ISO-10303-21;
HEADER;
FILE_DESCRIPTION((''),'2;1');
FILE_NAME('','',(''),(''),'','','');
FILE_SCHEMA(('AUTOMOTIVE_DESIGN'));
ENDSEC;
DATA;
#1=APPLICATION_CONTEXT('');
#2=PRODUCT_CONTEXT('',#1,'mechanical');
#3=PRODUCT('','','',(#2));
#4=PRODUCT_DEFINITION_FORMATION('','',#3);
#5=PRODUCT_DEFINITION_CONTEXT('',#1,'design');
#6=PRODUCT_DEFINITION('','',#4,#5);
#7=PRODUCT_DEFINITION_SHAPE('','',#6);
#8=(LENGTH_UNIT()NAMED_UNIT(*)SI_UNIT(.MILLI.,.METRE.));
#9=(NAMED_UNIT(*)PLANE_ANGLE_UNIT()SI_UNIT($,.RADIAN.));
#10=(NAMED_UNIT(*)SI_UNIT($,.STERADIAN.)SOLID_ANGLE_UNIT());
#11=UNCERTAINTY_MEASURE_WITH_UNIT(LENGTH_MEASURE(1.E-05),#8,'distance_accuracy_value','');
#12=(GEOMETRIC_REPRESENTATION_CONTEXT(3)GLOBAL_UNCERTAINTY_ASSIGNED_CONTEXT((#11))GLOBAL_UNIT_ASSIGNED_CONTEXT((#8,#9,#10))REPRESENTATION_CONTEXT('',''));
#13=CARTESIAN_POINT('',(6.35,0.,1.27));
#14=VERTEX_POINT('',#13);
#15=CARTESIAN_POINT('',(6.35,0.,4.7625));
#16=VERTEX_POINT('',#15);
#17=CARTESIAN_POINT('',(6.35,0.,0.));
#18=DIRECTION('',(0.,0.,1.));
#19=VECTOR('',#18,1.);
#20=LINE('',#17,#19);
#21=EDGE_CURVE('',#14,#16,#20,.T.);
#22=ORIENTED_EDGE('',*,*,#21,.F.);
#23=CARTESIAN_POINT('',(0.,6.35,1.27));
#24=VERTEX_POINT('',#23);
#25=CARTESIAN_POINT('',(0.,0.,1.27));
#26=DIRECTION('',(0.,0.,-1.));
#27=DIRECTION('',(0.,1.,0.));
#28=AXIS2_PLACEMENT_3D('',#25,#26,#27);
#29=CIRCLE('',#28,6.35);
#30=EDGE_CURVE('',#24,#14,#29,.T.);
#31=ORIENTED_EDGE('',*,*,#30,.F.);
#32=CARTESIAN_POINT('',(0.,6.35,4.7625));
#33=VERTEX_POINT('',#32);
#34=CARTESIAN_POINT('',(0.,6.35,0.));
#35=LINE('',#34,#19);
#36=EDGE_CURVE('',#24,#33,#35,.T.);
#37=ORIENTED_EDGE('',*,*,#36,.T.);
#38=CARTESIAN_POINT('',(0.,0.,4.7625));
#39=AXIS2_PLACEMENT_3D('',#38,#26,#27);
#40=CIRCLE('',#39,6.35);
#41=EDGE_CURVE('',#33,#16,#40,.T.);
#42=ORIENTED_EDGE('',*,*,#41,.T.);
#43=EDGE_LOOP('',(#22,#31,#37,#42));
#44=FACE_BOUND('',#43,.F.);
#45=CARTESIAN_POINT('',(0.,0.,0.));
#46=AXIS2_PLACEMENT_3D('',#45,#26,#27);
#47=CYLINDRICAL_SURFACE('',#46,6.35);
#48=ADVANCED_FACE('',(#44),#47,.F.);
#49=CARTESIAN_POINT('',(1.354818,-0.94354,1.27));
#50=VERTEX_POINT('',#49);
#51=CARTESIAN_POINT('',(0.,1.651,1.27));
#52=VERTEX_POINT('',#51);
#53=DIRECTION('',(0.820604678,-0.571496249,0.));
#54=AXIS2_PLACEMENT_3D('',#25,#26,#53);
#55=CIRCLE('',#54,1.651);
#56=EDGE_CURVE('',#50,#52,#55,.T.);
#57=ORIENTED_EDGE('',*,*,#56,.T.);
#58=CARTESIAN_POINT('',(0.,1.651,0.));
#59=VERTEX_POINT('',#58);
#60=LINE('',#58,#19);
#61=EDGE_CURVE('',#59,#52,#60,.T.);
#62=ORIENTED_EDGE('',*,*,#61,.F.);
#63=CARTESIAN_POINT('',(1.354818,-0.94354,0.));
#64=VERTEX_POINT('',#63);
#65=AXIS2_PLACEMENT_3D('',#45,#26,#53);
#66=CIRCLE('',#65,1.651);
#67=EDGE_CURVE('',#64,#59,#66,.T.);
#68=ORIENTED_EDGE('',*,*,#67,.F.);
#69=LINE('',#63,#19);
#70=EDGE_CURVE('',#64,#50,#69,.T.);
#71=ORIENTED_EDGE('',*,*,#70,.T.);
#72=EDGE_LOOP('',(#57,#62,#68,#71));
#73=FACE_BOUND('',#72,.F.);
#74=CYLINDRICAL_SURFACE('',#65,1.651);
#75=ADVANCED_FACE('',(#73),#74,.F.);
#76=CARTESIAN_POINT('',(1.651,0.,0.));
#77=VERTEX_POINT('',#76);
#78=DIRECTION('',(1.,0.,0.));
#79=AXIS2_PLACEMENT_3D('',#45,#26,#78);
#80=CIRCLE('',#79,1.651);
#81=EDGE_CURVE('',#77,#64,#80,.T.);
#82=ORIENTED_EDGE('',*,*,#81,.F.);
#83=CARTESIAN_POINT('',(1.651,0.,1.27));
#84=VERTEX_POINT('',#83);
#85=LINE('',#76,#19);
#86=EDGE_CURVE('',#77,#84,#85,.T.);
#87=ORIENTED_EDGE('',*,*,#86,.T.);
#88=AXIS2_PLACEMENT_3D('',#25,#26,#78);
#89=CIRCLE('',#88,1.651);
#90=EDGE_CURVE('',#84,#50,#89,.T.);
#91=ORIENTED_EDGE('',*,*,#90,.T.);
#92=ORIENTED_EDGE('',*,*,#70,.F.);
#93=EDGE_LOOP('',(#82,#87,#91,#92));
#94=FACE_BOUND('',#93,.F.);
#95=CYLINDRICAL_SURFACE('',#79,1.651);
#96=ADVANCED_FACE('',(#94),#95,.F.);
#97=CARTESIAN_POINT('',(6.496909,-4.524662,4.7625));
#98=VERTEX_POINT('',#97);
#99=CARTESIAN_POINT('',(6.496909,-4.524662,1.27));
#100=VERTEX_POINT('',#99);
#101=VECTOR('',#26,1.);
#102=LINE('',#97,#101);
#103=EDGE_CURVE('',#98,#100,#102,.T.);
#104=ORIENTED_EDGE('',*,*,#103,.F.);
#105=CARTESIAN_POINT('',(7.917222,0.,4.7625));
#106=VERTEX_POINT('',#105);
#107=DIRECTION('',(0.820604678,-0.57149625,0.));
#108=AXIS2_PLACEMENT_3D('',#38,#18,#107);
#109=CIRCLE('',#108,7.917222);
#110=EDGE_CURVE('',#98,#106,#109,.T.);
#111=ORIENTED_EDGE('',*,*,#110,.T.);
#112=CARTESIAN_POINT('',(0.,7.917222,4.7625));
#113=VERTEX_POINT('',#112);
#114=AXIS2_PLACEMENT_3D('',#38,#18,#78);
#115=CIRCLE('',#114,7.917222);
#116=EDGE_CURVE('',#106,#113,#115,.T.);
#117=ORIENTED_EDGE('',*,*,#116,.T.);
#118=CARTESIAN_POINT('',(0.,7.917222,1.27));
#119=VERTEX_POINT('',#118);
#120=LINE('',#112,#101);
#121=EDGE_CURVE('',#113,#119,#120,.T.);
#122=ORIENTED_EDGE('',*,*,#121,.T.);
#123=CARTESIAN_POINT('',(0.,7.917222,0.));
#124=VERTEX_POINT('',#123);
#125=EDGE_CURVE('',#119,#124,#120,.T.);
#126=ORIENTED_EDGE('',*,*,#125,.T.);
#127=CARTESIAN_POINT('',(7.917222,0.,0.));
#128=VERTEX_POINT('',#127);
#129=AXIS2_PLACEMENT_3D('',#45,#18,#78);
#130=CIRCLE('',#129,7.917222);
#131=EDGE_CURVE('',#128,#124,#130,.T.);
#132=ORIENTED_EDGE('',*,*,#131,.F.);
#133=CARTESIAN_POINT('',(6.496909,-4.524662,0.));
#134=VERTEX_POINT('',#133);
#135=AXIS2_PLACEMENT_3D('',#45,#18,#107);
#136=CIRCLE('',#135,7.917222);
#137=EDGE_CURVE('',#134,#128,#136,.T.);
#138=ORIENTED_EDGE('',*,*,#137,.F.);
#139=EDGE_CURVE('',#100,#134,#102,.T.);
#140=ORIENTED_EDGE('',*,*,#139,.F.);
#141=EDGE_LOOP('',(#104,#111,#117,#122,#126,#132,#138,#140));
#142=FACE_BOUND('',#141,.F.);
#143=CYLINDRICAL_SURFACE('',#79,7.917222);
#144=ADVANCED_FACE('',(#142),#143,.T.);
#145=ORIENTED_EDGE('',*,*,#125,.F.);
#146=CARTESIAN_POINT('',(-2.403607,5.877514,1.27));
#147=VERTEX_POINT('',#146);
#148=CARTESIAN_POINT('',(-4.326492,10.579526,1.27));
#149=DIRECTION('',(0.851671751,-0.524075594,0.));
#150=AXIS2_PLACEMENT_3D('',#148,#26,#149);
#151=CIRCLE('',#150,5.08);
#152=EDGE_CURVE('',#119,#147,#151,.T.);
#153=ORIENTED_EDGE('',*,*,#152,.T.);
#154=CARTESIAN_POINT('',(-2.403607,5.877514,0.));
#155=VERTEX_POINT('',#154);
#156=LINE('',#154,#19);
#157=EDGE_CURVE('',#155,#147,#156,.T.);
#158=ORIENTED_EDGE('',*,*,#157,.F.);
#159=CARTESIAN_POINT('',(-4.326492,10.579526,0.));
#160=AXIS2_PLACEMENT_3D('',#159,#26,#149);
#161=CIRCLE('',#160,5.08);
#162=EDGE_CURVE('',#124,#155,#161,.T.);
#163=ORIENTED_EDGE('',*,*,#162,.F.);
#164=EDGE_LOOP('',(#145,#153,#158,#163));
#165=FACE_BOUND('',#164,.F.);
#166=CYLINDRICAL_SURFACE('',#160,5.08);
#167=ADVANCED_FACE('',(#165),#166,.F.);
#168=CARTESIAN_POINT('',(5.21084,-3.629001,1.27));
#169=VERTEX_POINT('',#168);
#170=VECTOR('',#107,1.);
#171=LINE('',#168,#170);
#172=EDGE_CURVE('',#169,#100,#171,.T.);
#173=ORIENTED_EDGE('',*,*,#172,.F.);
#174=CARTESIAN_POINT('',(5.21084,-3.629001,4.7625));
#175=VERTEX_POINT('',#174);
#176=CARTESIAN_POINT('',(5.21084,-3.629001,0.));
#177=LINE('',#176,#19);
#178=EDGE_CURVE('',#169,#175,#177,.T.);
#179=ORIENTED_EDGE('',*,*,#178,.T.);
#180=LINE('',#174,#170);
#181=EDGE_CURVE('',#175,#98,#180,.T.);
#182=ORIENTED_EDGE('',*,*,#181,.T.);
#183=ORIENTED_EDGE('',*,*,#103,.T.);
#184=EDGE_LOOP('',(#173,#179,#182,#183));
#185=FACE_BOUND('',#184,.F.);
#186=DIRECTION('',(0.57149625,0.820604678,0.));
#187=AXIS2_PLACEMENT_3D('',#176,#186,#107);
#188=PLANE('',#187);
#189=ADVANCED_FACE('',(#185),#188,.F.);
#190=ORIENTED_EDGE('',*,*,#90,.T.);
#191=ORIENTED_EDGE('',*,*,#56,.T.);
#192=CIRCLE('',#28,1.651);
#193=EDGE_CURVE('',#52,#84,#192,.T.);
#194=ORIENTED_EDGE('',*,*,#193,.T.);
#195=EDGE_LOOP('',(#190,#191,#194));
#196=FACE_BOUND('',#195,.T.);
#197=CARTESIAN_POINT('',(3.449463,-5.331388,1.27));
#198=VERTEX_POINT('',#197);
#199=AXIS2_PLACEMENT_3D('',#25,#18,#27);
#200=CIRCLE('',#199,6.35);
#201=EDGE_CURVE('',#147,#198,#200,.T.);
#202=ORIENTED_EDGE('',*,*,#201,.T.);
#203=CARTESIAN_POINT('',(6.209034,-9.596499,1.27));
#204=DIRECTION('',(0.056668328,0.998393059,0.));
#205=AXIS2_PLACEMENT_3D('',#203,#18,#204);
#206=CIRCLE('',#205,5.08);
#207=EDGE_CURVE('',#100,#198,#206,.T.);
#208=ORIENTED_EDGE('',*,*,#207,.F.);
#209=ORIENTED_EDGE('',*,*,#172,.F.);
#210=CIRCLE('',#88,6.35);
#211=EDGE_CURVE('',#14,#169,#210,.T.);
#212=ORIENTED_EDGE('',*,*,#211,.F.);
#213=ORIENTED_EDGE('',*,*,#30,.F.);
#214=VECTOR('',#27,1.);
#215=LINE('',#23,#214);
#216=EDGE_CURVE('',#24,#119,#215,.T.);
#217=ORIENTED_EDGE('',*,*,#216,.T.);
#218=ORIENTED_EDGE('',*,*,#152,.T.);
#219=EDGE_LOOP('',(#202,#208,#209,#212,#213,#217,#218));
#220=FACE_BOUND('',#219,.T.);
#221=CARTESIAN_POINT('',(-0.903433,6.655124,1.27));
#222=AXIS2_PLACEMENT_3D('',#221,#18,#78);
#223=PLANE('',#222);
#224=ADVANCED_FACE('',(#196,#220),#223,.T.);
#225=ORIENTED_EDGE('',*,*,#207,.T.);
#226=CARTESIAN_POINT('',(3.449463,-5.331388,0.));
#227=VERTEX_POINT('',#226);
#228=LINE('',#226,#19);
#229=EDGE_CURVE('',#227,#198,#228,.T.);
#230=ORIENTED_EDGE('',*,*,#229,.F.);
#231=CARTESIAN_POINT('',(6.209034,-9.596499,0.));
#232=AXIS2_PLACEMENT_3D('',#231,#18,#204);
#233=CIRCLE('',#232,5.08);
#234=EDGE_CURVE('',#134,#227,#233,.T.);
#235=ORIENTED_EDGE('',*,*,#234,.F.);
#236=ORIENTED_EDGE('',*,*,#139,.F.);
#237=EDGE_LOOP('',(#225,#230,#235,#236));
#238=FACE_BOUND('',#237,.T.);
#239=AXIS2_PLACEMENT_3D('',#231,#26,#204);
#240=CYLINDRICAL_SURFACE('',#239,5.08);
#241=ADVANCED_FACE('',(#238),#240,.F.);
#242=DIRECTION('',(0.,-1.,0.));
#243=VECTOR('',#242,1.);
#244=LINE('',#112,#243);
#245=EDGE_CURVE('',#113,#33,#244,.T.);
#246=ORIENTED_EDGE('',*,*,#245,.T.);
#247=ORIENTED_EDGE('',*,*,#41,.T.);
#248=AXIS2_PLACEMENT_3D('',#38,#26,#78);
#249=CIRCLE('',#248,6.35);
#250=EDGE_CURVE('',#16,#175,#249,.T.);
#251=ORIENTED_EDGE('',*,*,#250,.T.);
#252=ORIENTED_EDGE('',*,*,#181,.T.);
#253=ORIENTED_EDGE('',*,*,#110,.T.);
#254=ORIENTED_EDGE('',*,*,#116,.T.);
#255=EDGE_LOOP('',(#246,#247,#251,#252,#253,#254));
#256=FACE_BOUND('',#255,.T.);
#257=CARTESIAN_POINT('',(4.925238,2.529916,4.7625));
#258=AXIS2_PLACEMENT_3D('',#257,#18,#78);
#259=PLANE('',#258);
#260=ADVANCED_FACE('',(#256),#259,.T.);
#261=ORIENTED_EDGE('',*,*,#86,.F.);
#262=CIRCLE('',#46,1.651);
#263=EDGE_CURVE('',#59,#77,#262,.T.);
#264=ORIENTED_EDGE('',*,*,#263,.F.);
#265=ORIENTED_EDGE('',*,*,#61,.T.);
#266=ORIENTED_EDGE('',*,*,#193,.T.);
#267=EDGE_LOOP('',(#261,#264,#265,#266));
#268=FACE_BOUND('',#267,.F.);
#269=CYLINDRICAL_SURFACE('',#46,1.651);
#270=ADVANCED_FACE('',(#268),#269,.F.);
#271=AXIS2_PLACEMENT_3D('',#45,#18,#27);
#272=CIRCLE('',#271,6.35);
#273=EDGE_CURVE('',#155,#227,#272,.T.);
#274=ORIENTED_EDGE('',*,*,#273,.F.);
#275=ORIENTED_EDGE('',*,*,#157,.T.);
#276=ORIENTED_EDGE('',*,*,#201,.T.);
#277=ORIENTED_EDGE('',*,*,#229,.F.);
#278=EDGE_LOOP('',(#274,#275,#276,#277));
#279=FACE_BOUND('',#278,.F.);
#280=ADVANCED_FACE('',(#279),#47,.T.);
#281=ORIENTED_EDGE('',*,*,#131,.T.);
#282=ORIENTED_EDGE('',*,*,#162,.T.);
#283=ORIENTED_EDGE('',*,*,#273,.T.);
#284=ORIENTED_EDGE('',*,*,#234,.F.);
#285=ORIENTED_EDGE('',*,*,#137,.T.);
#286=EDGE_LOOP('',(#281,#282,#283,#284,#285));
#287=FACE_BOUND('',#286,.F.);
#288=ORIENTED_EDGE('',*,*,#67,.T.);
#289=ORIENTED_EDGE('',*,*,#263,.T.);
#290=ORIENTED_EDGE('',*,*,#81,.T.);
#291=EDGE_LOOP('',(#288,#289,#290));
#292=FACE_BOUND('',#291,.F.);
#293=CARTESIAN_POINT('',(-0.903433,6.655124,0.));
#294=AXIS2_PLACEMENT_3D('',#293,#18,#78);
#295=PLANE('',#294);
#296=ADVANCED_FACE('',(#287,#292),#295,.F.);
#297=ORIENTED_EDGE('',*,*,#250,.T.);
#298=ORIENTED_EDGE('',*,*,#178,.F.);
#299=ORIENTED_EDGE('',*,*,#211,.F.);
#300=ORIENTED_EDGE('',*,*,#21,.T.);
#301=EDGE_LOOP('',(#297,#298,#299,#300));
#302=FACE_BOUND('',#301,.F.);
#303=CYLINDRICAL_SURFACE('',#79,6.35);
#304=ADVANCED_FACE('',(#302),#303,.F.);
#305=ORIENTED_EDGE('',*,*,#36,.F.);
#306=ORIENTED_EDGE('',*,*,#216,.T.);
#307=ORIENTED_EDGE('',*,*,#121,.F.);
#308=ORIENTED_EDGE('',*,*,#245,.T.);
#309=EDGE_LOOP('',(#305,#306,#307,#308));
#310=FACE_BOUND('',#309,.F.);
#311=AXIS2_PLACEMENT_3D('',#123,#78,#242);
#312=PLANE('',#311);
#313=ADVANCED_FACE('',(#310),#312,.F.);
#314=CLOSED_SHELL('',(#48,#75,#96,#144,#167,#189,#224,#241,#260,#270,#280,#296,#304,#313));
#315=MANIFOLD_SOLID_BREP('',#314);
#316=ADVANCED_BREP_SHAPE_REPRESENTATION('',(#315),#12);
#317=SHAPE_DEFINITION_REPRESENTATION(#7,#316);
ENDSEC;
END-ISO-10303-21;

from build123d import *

# Parameters (mm, degrees)
F1_DEPTH    = 1.27
F2_DEPTH    = 4.7625
F3_T1_DEPTH = 1.27


# Not quite as in the source:
# - a fillet or chamfer that OpenCascade refuses, or shapes differently, is made with other operations: its cross-section is extruded or revolved along the edge and cut away or added
# - a feature names something its author has since deleted; it is built from what else it names


with BuildPart() as f1:
    # F0 (on Top) → F1 (new body)
    with BuildSketch(Plane.XY):
        with BuildLine():
            ThreePointArc((5.2108397025, -3.6290011842), (6.0585201209, -1.9017975562), (6.35, 0))
            ThreePointArc((6.35, 0), (4.4901280605, 4.4901280605), (0, 6.35))
            Line((0, 6.35), (0, 5.1572436072))
            ThreePointArc((0, 5.1572436072), (3.6467219269, 3.6467219269), (5.1572436072, 0))
            ThreePointArc((5.1572436072, 0), (4.9205140413, -1.5445721714), (4.2320582273, -2.9473453792))
            Line((4.2320582273, -2.9473453792), (5.2108397025, -3.6290011842))
        make_face()
        with BuildLine():
            ThreePointArc((0, 6.35), (4.4901280605, 4.4901280605), (6.35, 0))
            ThreePointArc((6.35, 0), (6.0585201209, -1.9017975562), (5.2108397025, -3.6290011842))
            Line((5.2108397025, -3.6290011842), (6.4969090936, -4.5246624615))
            ThreePointArc((6.4969090936, -4.5246624615), (7.5538025952, -2.3711736577), (7.9172216188, 0))
            ThreePointArc((7.9172216188, 0), (5.5983210948, 5.5983210948), (0, 7.9172216188))
            Line((0, 7.9172216188), (0, 6.35))
        make_face()
        with BuildLine():
            Line((0, 5.1572436072), (0, 6.35))
            ThreePointArc((0, 6.35), (-5.6287946099, -2.939246713), (5.2108397025, -3.6290011842))
            Line((5.2108397025, -3.6290011842), (4.2320582273, -2.9473453792))
            ThreePointArc((4.2320582273, -2.9473453792), (-4.571506302, -2.3871513891), (0, 5.1572436072))
        make_face()
        with BuildLine():
            Line((0, 1.651), (0, 5.1572436072))
            ThreePointArc((0, 5.1572436072), (-4.571506302, -2.3871513891), (4.2320582273, -2.9473453792))
            Line((4.2320582273, -2.9473453792), (1.3548183226, -0.9435403079))
            ThreePointArc((1.3548183226, -0.9435403079), (-1.4634865986, -0.7642041454), (0, 1.651))
        make_face()
        with BuildLine():
            ThreePointArc((5.1572436072, 0), (3.6467219269, 3.6467219269), (0, 5.1572436072))
            Line((0, 5.1572436072), (0, 1.651))
            ThreePointArc((0, 1.651), (1.1674332957, 1.1674332957), (1.651, 0))
            ThreePointArc((1.651, 0), (1.5752152314, -0.4944673646), (1.3548183226, -0.9435403079))
            Line((1.3548183226, -0.9435403079), (4.2320582273, -2.9473453792))
            ThreePointArc((4.2320582273, -2.9473453792), (4.9205140413, -1.5445721714), (5.1572436072, 0))
        make_face()
    extrude(amount=F1_DEPTH)

    # F0 (on Top) → F2 (join)
    with BuildSketch(Plane.XY):
        with BuildLine():
            ThreePointArc((0, 6.35), (4.4901280605, 4.4901280605), (6.35, 0))
            ThreePointArc((6.35, 0), (6.0585201209, -1.9017975562), (5.2108397025, -3.6290011842))
            Line((5.2108397025, -3.6290011842), (6.4969090936, -4.5246624615))
            ThreePointArc((6.4969090936, -4.5246624615), (7.5538025952, -2.3711736577), (7.9172216188, 0))
            ThreePointArc((7.9172216188, 0), (5.5983210948, 5.5983210948), (0, 7.9172216188))
            Line((0, 7.9172216188), (0, 6.35))
        make_face()
    extrude(amount=F2_DEPTH)

    # F3: fillet of radius 5.08 on 2 edges, made by hand

    # F3_s2 → F3_t1 (join)
    with BuildSketch(Plane.XY):
        with BuildLine():
            ThreePointArc((0, 7.9172216188), (-1.0395816291, 6.7062044575), (-2.4036069424, 5.8775142421))
            ThreePointArc((-2.4036069424, 5.8775142421), (-1.2248029561, 6.2307590002), (0, 6.35))
            Line((0, 6.35), (0, 7.9172216188))
        make_face()
        with BuildLine():
            ThreePointArc((6.4969090936, -4.5246624615), (4.9090257444, -4.6856562433), (3.4494633266, -5.3313884456))
            ThreePointArc((3.4494633266, -5.3313884456), (4.4130196845, -4.5659344349), (5.2108397025, -3.6290011842))
            Line((5.2108397025, -3.6290011842), (6.4969090936, -4.5246624615))
        make_face()
    extrude(amount=F3_T1_DEPTH)


solid = f1.part
